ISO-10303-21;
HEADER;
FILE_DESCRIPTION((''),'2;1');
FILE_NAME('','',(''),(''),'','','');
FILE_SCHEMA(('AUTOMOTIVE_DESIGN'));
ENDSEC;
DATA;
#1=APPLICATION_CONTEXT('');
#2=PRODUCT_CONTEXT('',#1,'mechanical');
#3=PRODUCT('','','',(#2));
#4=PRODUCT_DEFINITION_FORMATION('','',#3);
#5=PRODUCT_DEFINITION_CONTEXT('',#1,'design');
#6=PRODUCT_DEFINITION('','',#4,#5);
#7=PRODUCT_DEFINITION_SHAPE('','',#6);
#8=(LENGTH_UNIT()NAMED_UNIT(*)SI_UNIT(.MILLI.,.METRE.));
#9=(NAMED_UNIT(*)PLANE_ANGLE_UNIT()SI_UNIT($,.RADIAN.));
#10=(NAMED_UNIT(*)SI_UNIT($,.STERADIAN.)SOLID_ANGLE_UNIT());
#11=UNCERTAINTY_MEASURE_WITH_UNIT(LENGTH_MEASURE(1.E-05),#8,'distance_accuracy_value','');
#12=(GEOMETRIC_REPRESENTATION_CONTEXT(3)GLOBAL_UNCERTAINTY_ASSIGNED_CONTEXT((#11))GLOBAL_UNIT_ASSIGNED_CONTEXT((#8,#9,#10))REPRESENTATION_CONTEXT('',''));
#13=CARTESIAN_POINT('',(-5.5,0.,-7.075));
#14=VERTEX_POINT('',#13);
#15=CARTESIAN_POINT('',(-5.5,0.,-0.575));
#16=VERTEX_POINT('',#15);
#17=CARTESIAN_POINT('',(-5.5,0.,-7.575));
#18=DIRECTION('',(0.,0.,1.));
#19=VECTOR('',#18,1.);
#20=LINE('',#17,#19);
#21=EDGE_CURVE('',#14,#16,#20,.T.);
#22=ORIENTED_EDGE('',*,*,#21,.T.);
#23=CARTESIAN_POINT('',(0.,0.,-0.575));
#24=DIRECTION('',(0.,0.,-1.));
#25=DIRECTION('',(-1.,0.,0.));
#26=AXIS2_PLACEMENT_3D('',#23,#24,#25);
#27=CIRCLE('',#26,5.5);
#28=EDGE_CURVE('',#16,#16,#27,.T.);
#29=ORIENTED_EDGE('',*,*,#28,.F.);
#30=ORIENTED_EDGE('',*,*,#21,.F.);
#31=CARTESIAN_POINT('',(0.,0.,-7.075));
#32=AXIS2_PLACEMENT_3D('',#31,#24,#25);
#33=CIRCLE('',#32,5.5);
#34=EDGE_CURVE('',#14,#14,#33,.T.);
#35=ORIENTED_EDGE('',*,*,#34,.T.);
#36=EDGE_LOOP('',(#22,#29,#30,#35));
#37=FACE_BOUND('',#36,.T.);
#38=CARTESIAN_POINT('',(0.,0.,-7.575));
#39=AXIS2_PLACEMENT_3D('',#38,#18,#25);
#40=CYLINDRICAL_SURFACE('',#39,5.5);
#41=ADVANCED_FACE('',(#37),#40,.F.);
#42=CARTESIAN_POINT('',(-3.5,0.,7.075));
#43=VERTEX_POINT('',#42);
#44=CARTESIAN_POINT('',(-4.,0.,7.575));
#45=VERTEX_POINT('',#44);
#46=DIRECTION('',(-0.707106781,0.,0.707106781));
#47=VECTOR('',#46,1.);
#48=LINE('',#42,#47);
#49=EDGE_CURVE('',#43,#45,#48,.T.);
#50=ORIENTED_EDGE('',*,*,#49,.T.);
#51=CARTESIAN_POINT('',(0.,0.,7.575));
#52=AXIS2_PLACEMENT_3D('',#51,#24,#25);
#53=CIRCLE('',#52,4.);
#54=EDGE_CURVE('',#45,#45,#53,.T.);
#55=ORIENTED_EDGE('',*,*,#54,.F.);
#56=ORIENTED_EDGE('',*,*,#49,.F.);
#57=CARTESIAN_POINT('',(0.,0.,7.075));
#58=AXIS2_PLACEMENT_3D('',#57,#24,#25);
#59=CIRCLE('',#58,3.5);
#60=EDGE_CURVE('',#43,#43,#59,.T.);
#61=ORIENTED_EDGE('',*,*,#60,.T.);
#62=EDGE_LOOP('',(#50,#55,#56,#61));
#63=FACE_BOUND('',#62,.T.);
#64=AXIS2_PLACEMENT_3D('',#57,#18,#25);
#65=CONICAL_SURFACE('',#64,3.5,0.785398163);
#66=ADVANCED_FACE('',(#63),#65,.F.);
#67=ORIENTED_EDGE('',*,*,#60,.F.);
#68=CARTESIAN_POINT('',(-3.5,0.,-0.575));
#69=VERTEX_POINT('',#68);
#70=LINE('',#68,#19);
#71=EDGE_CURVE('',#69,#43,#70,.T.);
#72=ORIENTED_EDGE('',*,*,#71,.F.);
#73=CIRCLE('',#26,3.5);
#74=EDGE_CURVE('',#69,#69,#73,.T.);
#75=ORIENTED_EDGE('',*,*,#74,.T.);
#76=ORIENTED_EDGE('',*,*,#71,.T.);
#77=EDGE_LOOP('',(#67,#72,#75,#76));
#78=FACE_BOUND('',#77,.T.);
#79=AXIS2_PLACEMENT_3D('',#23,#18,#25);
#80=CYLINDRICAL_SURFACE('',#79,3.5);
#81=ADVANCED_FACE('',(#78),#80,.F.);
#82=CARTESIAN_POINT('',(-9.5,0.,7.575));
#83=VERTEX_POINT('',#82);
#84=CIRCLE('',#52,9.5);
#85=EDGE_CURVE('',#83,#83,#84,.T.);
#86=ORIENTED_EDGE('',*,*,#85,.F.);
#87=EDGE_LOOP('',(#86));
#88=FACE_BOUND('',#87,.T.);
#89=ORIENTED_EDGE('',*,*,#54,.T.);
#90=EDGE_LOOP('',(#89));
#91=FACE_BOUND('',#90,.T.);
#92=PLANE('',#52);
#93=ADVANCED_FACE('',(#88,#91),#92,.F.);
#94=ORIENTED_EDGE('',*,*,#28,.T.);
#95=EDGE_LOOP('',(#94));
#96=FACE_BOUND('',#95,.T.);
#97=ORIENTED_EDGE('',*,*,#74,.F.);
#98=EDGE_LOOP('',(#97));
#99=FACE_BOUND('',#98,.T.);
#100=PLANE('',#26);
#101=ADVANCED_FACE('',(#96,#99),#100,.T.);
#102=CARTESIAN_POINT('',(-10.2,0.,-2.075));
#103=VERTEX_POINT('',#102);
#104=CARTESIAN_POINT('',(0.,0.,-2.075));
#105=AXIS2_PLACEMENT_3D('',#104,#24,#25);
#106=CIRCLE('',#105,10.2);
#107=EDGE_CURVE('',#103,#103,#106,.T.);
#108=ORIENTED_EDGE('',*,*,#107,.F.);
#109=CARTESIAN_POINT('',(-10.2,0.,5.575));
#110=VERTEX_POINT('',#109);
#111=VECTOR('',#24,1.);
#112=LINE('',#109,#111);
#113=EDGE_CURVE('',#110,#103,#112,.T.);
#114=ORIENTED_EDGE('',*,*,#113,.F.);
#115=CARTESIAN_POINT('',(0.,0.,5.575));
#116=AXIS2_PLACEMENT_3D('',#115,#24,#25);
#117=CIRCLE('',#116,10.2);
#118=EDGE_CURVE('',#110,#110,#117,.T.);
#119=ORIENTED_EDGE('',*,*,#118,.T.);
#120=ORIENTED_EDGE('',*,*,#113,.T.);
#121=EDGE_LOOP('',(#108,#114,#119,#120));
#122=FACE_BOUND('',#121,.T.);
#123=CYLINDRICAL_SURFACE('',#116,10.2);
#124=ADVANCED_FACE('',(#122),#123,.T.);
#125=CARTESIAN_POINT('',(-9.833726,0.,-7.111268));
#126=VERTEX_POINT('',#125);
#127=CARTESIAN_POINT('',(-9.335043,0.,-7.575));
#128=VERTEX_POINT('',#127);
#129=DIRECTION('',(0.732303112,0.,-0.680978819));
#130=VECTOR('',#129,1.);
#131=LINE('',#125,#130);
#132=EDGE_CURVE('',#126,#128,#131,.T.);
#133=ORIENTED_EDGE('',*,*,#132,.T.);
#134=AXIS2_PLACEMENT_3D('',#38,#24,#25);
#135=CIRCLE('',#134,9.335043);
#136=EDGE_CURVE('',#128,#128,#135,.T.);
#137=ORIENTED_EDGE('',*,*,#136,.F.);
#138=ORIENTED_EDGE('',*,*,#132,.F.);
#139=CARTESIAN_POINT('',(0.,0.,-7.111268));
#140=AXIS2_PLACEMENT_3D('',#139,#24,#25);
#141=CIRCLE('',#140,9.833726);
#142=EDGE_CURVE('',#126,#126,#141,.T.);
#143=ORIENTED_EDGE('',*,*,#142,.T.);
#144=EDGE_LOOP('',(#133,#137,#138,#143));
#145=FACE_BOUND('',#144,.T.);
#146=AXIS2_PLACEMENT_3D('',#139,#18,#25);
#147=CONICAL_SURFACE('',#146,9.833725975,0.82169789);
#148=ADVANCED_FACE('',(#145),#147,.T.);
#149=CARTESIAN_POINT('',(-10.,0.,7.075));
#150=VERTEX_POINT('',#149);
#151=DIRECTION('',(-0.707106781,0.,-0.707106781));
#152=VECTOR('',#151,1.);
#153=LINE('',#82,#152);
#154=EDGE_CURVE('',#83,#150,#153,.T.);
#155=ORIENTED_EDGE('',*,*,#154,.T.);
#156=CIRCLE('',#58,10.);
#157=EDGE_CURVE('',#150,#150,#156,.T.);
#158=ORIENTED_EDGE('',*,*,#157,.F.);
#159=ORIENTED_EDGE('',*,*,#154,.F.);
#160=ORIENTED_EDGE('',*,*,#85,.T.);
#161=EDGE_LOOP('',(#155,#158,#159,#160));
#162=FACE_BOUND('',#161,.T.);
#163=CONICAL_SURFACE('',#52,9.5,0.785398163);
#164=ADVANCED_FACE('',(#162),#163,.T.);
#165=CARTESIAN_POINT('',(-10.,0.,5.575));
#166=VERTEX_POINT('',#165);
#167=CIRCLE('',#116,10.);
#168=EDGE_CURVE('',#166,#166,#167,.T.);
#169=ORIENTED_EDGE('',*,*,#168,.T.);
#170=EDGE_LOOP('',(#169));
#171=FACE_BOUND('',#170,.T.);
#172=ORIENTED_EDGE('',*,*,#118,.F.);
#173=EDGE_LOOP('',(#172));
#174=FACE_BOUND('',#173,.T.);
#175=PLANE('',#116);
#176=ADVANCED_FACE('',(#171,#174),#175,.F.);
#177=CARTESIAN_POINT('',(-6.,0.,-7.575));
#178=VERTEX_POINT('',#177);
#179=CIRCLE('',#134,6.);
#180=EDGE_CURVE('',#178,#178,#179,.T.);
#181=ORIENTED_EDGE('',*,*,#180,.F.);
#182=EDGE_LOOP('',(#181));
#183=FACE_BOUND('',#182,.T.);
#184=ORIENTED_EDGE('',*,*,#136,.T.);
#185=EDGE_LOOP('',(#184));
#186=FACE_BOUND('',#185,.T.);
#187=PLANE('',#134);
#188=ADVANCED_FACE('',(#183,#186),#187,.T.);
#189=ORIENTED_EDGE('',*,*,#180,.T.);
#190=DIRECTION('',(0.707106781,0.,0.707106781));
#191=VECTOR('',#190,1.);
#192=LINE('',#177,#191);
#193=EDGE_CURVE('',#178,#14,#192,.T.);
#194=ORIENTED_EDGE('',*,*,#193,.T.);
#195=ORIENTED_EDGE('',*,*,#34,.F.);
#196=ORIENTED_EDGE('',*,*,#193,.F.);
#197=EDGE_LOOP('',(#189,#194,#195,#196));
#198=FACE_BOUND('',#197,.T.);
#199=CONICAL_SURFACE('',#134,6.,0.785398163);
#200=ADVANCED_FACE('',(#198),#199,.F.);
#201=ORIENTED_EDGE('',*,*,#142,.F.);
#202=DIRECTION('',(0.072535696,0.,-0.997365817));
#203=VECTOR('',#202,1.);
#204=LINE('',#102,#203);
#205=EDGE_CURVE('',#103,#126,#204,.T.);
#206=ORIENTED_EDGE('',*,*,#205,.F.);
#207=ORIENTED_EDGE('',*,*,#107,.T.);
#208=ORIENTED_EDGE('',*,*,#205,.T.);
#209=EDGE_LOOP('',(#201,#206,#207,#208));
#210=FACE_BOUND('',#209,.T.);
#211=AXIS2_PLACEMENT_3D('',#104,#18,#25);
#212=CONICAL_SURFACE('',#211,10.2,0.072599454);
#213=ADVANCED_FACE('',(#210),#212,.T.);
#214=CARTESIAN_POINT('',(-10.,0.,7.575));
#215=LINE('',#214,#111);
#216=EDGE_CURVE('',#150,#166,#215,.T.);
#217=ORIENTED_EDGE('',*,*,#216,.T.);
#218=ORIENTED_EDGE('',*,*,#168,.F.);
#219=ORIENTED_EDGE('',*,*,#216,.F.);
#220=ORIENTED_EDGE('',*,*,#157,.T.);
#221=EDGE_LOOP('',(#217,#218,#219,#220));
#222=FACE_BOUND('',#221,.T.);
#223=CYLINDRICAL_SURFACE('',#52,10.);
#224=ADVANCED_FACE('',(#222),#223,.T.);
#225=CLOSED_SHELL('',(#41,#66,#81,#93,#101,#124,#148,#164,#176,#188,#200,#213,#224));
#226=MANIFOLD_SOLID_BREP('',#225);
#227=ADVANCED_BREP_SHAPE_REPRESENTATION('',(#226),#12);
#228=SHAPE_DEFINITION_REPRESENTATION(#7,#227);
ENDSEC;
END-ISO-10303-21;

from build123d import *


# Not quite as in the source:
# - a fillet or chamfer that OpenCascade refuses, or shapes differently, is made with other operations: its cross-section is extruded or revolved along the edge and cut away or added


with BuildPart() as f1:
    # F0 (on Front) → F1 (revolve)
    with BuildSketch(Plane.XZ):
        Polygon((-3.5, -0.575), (-3.5, 7.575), (-10, 7.575), (-10, 5.575), (-10.2, 5.575), (-10.2, -2.075), (-9.8, -7.575), (-5.5, -7.575), (-5.5, -0.575), align=None)
    revolve(axis=Axis((0, 0, 0.3696661443), (0, 0, -1)))

    # F2: chamfer of 0.5 on 4 edges, made by hand

    # F2_s1 → F2_t2 (revolve, cut)
    with BuildSketch(Plane.XZ):
        Polygon((-6, -7.575), (-5.5, -7.075), (-5.5, -7.575), align=None)
    revolve(axis=Axis((0, 0, -7.575), (0, 0, -1)), mode=Mode.SUBTRACT)

    # F2_s3 → F2_t4 (revolve, cut)
    with BuildSketch(Plane.XZ):
        Polygon((-9.8337259747, -7.1112678479), (-9.3350430662, -7.575), (-9.8, -7.575), align=None)
    revolve(axis=Axis((0, 0, -7.575), (0, 0, -1)), mode=Mode.SUBTRACT)

    # F2_s5 → F2_t6 (revolve, cut)
    with BuildSketch(Plane.XZ):
        Polygon((-9.5, 7.575), (-10, 7.075), (-10, 7.575), align=None)
    revolve(axis=Axis((0, 0, 7.575), (0, 0, -1)), mode=Mode.SUBTRACT)

    # F2_s7 → F2_t8 (revolve, cut)
    with BuildSketch(Plane.XZ):
        Polygon((-3.5, 7.075), (-4, 7.575), (-3.5, 7.575), align=None)
    revolve(axis=Axis((0, 0, 7.575), (0, 0, -1)), mode=Mode.SUBTRACT)


solid = f1.part
